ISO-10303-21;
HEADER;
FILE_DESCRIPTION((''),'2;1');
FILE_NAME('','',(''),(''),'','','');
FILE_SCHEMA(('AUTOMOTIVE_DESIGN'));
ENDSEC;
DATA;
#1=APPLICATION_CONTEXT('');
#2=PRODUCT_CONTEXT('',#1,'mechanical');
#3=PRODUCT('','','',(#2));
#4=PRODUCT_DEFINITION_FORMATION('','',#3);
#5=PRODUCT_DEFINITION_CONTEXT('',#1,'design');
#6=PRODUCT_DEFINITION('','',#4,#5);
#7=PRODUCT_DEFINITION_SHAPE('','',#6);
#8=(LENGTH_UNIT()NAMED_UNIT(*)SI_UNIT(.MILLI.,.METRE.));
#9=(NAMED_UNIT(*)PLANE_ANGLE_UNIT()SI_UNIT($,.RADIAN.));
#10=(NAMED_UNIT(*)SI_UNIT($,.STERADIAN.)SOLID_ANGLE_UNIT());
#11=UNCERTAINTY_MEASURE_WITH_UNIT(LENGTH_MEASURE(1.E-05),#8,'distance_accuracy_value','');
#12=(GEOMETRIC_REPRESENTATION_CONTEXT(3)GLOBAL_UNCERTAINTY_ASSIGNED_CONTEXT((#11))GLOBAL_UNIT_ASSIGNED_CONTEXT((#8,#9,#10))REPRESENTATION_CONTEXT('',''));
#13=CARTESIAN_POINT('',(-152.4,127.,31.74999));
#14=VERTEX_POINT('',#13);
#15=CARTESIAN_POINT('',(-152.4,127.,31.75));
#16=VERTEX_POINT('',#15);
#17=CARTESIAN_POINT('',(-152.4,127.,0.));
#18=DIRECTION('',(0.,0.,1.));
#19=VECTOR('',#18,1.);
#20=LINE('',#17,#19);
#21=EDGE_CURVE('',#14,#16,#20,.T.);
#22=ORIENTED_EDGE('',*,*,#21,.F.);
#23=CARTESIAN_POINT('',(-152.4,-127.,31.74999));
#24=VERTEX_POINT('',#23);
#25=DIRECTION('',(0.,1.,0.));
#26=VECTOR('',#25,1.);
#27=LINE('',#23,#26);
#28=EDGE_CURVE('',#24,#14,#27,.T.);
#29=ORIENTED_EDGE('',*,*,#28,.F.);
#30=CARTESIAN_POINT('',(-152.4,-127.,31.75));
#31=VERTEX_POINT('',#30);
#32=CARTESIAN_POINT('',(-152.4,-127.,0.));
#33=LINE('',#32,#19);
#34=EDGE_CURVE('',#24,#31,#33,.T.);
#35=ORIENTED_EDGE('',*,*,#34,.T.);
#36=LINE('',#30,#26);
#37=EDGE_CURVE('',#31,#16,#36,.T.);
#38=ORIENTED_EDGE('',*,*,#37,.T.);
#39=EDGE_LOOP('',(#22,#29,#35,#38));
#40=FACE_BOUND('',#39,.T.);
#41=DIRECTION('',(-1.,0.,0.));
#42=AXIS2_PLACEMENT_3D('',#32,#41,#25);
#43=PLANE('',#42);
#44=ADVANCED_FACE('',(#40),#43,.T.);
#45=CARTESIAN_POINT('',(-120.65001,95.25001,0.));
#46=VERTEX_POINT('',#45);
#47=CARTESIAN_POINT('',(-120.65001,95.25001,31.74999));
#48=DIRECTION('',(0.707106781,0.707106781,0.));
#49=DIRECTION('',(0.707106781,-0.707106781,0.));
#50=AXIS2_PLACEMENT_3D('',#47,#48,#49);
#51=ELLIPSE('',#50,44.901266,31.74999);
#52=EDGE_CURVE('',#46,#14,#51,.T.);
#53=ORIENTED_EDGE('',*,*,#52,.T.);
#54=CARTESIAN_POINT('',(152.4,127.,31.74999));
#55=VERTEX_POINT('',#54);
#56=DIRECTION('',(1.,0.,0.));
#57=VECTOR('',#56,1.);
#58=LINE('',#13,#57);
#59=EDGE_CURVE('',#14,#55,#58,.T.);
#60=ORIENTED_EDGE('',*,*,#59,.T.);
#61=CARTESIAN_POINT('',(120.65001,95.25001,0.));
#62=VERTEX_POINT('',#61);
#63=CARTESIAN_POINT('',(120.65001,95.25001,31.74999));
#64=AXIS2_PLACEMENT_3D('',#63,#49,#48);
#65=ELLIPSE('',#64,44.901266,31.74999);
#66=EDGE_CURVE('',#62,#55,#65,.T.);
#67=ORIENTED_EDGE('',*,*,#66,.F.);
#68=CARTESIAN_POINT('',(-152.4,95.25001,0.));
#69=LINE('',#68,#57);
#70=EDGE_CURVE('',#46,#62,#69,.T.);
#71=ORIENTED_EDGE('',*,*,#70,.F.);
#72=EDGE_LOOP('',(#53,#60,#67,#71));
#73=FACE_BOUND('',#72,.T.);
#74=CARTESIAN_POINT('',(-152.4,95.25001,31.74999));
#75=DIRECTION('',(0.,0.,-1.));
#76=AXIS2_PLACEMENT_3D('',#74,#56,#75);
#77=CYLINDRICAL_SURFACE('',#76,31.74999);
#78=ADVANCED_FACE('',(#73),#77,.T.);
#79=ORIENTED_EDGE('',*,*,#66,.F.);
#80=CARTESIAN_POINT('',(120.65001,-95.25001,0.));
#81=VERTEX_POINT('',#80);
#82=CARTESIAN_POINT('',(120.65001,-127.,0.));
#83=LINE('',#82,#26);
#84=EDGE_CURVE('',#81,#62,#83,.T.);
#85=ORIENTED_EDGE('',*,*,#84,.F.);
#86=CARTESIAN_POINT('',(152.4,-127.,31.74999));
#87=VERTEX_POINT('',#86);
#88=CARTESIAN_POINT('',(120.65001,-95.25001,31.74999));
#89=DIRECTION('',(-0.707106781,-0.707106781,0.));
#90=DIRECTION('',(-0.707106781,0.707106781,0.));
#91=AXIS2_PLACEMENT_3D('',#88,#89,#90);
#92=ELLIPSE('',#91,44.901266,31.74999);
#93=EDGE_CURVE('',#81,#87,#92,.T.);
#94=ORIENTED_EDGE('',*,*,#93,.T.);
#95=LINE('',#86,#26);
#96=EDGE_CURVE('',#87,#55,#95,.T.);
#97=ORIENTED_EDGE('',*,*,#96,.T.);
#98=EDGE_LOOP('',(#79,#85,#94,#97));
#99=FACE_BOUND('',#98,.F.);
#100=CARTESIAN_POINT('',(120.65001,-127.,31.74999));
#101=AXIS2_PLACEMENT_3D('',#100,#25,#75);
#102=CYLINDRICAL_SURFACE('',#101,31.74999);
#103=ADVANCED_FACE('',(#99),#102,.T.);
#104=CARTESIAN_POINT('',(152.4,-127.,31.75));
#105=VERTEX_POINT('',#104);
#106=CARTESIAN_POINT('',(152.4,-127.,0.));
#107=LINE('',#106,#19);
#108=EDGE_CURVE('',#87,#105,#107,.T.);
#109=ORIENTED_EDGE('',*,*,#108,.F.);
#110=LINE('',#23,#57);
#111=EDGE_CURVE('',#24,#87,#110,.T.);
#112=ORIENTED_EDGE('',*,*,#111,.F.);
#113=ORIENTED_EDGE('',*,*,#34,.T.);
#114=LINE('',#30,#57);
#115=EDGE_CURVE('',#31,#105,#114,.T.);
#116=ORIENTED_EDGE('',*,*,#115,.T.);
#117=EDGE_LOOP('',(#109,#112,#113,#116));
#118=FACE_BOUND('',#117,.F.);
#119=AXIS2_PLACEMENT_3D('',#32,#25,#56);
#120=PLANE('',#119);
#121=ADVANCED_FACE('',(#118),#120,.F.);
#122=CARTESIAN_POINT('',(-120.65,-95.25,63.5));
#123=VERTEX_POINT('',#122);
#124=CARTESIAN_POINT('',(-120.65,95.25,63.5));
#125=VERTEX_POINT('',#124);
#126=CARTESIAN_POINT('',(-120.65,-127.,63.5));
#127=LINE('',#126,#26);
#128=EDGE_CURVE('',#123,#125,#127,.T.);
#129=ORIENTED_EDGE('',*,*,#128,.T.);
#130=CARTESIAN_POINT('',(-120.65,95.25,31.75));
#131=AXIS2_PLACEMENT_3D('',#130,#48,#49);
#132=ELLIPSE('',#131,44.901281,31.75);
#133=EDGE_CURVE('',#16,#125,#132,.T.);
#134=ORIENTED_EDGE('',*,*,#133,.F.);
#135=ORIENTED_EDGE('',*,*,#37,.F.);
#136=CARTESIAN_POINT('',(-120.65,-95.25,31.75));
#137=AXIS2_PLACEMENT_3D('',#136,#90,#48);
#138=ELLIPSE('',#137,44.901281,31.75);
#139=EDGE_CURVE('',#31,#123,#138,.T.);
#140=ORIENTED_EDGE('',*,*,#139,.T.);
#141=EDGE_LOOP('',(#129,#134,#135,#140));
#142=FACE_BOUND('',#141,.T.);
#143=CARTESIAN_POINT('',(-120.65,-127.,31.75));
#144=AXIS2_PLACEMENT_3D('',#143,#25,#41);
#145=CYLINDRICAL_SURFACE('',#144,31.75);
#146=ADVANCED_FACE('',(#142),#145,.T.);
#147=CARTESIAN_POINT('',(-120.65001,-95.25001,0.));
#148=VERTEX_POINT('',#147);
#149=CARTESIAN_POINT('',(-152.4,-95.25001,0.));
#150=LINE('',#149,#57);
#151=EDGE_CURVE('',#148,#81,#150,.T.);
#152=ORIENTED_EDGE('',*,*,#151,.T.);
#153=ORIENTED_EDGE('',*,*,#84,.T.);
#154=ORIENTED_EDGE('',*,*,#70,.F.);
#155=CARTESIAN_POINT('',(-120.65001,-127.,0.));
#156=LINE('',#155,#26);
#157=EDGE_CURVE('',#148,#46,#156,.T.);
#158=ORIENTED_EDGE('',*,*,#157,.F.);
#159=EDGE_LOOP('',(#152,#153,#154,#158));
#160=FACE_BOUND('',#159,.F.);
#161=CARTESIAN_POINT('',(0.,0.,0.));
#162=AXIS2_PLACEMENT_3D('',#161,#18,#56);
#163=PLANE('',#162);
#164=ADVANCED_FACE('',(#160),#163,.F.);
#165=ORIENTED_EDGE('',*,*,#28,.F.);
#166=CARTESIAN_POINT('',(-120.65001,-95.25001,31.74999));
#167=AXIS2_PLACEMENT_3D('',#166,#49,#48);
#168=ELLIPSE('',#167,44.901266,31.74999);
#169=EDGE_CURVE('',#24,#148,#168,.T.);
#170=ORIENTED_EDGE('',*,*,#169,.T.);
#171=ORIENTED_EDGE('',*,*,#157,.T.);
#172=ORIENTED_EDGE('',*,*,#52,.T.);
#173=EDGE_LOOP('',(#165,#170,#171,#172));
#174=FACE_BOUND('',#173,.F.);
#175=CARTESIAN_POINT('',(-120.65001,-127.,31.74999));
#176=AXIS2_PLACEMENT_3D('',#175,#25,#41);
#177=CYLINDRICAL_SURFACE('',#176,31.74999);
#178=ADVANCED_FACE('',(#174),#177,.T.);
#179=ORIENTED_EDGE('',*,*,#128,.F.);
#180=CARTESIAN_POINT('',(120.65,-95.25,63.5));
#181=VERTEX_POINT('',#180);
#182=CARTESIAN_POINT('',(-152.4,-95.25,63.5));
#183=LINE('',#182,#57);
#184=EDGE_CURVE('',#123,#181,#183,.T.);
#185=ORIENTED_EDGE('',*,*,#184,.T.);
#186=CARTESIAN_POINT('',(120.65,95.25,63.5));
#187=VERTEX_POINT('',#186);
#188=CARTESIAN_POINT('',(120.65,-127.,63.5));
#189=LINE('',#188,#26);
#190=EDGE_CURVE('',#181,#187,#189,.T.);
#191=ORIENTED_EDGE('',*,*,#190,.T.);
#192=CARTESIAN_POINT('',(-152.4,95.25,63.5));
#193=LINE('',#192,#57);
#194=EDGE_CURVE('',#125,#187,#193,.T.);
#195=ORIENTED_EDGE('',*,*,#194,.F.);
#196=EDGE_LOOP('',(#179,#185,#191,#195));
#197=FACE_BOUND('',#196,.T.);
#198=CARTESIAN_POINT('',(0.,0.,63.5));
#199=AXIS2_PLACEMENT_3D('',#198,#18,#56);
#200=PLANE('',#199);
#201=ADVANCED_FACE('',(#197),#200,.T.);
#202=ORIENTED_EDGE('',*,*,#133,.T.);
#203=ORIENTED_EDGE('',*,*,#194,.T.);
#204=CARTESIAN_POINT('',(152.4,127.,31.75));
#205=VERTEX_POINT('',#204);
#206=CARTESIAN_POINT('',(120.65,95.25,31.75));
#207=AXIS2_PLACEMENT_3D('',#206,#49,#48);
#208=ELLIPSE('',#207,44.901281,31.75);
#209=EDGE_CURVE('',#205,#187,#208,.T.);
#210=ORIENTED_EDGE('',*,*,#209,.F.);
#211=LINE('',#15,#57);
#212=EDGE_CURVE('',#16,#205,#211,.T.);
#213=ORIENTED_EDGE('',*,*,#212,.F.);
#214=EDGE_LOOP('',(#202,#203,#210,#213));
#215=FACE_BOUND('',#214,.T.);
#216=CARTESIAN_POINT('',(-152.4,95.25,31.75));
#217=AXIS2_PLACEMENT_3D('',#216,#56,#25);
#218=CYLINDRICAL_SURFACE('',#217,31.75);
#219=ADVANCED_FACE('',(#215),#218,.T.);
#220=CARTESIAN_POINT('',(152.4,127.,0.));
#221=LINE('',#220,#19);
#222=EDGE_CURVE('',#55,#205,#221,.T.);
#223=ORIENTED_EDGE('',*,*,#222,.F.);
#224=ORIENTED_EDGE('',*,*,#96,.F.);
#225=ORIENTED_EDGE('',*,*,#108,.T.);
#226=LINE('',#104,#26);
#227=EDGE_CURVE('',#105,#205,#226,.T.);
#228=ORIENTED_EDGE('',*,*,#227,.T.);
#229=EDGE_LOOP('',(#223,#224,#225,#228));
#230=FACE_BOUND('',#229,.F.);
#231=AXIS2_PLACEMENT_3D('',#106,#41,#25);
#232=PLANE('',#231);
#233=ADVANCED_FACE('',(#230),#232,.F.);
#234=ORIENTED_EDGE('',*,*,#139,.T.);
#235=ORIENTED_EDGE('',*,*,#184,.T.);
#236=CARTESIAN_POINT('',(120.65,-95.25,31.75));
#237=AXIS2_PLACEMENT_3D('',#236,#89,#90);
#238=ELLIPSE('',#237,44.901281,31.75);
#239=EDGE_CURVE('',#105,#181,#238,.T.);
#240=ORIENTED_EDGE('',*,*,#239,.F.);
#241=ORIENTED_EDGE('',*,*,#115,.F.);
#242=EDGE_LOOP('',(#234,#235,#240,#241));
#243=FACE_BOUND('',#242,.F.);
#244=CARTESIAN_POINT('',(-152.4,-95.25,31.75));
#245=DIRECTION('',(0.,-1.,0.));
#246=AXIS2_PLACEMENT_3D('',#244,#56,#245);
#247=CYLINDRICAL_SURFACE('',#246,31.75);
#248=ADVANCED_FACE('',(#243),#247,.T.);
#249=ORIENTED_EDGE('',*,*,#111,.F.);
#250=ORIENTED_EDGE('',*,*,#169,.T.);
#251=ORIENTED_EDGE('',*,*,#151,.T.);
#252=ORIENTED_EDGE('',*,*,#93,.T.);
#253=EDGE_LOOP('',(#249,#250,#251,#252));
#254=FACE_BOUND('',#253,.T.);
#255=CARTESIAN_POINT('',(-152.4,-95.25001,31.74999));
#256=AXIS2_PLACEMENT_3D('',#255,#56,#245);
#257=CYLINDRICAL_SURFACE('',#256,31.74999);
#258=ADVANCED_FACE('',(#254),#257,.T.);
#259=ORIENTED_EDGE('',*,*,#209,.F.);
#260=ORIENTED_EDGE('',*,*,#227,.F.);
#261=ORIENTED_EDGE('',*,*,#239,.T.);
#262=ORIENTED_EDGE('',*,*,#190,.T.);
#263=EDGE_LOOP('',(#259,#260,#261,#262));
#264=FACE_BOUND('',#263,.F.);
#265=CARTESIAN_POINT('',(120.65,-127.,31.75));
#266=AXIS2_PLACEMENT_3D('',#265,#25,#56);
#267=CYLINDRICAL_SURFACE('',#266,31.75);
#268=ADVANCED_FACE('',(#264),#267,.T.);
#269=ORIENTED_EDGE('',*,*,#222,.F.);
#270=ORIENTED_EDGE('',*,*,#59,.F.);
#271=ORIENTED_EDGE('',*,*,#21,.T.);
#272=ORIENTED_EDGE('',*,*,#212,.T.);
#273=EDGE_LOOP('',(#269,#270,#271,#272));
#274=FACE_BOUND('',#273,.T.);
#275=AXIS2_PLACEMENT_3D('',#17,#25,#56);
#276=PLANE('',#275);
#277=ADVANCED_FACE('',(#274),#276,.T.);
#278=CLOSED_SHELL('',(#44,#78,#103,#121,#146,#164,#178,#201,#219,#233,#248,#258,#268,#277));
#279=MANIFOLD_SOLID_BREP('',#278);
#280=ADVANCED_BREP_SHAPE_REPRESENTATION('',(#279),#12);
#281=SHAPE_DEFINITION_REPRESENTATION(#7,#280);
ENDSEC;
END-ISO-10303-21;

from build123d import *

# Parameters (mm, degrees)
F0_W     = 304.8
F0_H     = 254
F1_DEPTH = 63.5
F2_R     = 31.75
F3_R     = 31.74999


# Not quite as in the source:
# - a fillet or chamfer is up to 0.001 mm smaller than in the source, because OpenCascade refuses the exact size


with BuildPart() as f1:
    # F0 (on Top) → F1 (new body)
    with BuildSketch(Plane.XY):
        Rectangle(F0_W, F0_H)
    extrude(amount=F1_DEPTH)

    # F2
    f2_edges = [f1.edges().sort_by_distance(p)[0] for p in [
        (152.4, 0, 63.5),
        (0, 127, 63.5),
        (-152.4, 0, 63.5),
        (0, -127, 63.5),
    ]]
    fillet(f2_edges, radius=F2_R)

    # F3 (radius 31.75 in the source; OpenCascade refuses exactly that, so slightly less here)
    f3_edges = [f1.edges().sort_by_distance(p)[0] for p in [
        (152.4, 0, 0),
        (0, 127, 0),
        (-152.4, 0, 0),
        (0, -127, 0),
    ]]
    fillet(f3_edges, radius=F3_R)


solid = f1.part
